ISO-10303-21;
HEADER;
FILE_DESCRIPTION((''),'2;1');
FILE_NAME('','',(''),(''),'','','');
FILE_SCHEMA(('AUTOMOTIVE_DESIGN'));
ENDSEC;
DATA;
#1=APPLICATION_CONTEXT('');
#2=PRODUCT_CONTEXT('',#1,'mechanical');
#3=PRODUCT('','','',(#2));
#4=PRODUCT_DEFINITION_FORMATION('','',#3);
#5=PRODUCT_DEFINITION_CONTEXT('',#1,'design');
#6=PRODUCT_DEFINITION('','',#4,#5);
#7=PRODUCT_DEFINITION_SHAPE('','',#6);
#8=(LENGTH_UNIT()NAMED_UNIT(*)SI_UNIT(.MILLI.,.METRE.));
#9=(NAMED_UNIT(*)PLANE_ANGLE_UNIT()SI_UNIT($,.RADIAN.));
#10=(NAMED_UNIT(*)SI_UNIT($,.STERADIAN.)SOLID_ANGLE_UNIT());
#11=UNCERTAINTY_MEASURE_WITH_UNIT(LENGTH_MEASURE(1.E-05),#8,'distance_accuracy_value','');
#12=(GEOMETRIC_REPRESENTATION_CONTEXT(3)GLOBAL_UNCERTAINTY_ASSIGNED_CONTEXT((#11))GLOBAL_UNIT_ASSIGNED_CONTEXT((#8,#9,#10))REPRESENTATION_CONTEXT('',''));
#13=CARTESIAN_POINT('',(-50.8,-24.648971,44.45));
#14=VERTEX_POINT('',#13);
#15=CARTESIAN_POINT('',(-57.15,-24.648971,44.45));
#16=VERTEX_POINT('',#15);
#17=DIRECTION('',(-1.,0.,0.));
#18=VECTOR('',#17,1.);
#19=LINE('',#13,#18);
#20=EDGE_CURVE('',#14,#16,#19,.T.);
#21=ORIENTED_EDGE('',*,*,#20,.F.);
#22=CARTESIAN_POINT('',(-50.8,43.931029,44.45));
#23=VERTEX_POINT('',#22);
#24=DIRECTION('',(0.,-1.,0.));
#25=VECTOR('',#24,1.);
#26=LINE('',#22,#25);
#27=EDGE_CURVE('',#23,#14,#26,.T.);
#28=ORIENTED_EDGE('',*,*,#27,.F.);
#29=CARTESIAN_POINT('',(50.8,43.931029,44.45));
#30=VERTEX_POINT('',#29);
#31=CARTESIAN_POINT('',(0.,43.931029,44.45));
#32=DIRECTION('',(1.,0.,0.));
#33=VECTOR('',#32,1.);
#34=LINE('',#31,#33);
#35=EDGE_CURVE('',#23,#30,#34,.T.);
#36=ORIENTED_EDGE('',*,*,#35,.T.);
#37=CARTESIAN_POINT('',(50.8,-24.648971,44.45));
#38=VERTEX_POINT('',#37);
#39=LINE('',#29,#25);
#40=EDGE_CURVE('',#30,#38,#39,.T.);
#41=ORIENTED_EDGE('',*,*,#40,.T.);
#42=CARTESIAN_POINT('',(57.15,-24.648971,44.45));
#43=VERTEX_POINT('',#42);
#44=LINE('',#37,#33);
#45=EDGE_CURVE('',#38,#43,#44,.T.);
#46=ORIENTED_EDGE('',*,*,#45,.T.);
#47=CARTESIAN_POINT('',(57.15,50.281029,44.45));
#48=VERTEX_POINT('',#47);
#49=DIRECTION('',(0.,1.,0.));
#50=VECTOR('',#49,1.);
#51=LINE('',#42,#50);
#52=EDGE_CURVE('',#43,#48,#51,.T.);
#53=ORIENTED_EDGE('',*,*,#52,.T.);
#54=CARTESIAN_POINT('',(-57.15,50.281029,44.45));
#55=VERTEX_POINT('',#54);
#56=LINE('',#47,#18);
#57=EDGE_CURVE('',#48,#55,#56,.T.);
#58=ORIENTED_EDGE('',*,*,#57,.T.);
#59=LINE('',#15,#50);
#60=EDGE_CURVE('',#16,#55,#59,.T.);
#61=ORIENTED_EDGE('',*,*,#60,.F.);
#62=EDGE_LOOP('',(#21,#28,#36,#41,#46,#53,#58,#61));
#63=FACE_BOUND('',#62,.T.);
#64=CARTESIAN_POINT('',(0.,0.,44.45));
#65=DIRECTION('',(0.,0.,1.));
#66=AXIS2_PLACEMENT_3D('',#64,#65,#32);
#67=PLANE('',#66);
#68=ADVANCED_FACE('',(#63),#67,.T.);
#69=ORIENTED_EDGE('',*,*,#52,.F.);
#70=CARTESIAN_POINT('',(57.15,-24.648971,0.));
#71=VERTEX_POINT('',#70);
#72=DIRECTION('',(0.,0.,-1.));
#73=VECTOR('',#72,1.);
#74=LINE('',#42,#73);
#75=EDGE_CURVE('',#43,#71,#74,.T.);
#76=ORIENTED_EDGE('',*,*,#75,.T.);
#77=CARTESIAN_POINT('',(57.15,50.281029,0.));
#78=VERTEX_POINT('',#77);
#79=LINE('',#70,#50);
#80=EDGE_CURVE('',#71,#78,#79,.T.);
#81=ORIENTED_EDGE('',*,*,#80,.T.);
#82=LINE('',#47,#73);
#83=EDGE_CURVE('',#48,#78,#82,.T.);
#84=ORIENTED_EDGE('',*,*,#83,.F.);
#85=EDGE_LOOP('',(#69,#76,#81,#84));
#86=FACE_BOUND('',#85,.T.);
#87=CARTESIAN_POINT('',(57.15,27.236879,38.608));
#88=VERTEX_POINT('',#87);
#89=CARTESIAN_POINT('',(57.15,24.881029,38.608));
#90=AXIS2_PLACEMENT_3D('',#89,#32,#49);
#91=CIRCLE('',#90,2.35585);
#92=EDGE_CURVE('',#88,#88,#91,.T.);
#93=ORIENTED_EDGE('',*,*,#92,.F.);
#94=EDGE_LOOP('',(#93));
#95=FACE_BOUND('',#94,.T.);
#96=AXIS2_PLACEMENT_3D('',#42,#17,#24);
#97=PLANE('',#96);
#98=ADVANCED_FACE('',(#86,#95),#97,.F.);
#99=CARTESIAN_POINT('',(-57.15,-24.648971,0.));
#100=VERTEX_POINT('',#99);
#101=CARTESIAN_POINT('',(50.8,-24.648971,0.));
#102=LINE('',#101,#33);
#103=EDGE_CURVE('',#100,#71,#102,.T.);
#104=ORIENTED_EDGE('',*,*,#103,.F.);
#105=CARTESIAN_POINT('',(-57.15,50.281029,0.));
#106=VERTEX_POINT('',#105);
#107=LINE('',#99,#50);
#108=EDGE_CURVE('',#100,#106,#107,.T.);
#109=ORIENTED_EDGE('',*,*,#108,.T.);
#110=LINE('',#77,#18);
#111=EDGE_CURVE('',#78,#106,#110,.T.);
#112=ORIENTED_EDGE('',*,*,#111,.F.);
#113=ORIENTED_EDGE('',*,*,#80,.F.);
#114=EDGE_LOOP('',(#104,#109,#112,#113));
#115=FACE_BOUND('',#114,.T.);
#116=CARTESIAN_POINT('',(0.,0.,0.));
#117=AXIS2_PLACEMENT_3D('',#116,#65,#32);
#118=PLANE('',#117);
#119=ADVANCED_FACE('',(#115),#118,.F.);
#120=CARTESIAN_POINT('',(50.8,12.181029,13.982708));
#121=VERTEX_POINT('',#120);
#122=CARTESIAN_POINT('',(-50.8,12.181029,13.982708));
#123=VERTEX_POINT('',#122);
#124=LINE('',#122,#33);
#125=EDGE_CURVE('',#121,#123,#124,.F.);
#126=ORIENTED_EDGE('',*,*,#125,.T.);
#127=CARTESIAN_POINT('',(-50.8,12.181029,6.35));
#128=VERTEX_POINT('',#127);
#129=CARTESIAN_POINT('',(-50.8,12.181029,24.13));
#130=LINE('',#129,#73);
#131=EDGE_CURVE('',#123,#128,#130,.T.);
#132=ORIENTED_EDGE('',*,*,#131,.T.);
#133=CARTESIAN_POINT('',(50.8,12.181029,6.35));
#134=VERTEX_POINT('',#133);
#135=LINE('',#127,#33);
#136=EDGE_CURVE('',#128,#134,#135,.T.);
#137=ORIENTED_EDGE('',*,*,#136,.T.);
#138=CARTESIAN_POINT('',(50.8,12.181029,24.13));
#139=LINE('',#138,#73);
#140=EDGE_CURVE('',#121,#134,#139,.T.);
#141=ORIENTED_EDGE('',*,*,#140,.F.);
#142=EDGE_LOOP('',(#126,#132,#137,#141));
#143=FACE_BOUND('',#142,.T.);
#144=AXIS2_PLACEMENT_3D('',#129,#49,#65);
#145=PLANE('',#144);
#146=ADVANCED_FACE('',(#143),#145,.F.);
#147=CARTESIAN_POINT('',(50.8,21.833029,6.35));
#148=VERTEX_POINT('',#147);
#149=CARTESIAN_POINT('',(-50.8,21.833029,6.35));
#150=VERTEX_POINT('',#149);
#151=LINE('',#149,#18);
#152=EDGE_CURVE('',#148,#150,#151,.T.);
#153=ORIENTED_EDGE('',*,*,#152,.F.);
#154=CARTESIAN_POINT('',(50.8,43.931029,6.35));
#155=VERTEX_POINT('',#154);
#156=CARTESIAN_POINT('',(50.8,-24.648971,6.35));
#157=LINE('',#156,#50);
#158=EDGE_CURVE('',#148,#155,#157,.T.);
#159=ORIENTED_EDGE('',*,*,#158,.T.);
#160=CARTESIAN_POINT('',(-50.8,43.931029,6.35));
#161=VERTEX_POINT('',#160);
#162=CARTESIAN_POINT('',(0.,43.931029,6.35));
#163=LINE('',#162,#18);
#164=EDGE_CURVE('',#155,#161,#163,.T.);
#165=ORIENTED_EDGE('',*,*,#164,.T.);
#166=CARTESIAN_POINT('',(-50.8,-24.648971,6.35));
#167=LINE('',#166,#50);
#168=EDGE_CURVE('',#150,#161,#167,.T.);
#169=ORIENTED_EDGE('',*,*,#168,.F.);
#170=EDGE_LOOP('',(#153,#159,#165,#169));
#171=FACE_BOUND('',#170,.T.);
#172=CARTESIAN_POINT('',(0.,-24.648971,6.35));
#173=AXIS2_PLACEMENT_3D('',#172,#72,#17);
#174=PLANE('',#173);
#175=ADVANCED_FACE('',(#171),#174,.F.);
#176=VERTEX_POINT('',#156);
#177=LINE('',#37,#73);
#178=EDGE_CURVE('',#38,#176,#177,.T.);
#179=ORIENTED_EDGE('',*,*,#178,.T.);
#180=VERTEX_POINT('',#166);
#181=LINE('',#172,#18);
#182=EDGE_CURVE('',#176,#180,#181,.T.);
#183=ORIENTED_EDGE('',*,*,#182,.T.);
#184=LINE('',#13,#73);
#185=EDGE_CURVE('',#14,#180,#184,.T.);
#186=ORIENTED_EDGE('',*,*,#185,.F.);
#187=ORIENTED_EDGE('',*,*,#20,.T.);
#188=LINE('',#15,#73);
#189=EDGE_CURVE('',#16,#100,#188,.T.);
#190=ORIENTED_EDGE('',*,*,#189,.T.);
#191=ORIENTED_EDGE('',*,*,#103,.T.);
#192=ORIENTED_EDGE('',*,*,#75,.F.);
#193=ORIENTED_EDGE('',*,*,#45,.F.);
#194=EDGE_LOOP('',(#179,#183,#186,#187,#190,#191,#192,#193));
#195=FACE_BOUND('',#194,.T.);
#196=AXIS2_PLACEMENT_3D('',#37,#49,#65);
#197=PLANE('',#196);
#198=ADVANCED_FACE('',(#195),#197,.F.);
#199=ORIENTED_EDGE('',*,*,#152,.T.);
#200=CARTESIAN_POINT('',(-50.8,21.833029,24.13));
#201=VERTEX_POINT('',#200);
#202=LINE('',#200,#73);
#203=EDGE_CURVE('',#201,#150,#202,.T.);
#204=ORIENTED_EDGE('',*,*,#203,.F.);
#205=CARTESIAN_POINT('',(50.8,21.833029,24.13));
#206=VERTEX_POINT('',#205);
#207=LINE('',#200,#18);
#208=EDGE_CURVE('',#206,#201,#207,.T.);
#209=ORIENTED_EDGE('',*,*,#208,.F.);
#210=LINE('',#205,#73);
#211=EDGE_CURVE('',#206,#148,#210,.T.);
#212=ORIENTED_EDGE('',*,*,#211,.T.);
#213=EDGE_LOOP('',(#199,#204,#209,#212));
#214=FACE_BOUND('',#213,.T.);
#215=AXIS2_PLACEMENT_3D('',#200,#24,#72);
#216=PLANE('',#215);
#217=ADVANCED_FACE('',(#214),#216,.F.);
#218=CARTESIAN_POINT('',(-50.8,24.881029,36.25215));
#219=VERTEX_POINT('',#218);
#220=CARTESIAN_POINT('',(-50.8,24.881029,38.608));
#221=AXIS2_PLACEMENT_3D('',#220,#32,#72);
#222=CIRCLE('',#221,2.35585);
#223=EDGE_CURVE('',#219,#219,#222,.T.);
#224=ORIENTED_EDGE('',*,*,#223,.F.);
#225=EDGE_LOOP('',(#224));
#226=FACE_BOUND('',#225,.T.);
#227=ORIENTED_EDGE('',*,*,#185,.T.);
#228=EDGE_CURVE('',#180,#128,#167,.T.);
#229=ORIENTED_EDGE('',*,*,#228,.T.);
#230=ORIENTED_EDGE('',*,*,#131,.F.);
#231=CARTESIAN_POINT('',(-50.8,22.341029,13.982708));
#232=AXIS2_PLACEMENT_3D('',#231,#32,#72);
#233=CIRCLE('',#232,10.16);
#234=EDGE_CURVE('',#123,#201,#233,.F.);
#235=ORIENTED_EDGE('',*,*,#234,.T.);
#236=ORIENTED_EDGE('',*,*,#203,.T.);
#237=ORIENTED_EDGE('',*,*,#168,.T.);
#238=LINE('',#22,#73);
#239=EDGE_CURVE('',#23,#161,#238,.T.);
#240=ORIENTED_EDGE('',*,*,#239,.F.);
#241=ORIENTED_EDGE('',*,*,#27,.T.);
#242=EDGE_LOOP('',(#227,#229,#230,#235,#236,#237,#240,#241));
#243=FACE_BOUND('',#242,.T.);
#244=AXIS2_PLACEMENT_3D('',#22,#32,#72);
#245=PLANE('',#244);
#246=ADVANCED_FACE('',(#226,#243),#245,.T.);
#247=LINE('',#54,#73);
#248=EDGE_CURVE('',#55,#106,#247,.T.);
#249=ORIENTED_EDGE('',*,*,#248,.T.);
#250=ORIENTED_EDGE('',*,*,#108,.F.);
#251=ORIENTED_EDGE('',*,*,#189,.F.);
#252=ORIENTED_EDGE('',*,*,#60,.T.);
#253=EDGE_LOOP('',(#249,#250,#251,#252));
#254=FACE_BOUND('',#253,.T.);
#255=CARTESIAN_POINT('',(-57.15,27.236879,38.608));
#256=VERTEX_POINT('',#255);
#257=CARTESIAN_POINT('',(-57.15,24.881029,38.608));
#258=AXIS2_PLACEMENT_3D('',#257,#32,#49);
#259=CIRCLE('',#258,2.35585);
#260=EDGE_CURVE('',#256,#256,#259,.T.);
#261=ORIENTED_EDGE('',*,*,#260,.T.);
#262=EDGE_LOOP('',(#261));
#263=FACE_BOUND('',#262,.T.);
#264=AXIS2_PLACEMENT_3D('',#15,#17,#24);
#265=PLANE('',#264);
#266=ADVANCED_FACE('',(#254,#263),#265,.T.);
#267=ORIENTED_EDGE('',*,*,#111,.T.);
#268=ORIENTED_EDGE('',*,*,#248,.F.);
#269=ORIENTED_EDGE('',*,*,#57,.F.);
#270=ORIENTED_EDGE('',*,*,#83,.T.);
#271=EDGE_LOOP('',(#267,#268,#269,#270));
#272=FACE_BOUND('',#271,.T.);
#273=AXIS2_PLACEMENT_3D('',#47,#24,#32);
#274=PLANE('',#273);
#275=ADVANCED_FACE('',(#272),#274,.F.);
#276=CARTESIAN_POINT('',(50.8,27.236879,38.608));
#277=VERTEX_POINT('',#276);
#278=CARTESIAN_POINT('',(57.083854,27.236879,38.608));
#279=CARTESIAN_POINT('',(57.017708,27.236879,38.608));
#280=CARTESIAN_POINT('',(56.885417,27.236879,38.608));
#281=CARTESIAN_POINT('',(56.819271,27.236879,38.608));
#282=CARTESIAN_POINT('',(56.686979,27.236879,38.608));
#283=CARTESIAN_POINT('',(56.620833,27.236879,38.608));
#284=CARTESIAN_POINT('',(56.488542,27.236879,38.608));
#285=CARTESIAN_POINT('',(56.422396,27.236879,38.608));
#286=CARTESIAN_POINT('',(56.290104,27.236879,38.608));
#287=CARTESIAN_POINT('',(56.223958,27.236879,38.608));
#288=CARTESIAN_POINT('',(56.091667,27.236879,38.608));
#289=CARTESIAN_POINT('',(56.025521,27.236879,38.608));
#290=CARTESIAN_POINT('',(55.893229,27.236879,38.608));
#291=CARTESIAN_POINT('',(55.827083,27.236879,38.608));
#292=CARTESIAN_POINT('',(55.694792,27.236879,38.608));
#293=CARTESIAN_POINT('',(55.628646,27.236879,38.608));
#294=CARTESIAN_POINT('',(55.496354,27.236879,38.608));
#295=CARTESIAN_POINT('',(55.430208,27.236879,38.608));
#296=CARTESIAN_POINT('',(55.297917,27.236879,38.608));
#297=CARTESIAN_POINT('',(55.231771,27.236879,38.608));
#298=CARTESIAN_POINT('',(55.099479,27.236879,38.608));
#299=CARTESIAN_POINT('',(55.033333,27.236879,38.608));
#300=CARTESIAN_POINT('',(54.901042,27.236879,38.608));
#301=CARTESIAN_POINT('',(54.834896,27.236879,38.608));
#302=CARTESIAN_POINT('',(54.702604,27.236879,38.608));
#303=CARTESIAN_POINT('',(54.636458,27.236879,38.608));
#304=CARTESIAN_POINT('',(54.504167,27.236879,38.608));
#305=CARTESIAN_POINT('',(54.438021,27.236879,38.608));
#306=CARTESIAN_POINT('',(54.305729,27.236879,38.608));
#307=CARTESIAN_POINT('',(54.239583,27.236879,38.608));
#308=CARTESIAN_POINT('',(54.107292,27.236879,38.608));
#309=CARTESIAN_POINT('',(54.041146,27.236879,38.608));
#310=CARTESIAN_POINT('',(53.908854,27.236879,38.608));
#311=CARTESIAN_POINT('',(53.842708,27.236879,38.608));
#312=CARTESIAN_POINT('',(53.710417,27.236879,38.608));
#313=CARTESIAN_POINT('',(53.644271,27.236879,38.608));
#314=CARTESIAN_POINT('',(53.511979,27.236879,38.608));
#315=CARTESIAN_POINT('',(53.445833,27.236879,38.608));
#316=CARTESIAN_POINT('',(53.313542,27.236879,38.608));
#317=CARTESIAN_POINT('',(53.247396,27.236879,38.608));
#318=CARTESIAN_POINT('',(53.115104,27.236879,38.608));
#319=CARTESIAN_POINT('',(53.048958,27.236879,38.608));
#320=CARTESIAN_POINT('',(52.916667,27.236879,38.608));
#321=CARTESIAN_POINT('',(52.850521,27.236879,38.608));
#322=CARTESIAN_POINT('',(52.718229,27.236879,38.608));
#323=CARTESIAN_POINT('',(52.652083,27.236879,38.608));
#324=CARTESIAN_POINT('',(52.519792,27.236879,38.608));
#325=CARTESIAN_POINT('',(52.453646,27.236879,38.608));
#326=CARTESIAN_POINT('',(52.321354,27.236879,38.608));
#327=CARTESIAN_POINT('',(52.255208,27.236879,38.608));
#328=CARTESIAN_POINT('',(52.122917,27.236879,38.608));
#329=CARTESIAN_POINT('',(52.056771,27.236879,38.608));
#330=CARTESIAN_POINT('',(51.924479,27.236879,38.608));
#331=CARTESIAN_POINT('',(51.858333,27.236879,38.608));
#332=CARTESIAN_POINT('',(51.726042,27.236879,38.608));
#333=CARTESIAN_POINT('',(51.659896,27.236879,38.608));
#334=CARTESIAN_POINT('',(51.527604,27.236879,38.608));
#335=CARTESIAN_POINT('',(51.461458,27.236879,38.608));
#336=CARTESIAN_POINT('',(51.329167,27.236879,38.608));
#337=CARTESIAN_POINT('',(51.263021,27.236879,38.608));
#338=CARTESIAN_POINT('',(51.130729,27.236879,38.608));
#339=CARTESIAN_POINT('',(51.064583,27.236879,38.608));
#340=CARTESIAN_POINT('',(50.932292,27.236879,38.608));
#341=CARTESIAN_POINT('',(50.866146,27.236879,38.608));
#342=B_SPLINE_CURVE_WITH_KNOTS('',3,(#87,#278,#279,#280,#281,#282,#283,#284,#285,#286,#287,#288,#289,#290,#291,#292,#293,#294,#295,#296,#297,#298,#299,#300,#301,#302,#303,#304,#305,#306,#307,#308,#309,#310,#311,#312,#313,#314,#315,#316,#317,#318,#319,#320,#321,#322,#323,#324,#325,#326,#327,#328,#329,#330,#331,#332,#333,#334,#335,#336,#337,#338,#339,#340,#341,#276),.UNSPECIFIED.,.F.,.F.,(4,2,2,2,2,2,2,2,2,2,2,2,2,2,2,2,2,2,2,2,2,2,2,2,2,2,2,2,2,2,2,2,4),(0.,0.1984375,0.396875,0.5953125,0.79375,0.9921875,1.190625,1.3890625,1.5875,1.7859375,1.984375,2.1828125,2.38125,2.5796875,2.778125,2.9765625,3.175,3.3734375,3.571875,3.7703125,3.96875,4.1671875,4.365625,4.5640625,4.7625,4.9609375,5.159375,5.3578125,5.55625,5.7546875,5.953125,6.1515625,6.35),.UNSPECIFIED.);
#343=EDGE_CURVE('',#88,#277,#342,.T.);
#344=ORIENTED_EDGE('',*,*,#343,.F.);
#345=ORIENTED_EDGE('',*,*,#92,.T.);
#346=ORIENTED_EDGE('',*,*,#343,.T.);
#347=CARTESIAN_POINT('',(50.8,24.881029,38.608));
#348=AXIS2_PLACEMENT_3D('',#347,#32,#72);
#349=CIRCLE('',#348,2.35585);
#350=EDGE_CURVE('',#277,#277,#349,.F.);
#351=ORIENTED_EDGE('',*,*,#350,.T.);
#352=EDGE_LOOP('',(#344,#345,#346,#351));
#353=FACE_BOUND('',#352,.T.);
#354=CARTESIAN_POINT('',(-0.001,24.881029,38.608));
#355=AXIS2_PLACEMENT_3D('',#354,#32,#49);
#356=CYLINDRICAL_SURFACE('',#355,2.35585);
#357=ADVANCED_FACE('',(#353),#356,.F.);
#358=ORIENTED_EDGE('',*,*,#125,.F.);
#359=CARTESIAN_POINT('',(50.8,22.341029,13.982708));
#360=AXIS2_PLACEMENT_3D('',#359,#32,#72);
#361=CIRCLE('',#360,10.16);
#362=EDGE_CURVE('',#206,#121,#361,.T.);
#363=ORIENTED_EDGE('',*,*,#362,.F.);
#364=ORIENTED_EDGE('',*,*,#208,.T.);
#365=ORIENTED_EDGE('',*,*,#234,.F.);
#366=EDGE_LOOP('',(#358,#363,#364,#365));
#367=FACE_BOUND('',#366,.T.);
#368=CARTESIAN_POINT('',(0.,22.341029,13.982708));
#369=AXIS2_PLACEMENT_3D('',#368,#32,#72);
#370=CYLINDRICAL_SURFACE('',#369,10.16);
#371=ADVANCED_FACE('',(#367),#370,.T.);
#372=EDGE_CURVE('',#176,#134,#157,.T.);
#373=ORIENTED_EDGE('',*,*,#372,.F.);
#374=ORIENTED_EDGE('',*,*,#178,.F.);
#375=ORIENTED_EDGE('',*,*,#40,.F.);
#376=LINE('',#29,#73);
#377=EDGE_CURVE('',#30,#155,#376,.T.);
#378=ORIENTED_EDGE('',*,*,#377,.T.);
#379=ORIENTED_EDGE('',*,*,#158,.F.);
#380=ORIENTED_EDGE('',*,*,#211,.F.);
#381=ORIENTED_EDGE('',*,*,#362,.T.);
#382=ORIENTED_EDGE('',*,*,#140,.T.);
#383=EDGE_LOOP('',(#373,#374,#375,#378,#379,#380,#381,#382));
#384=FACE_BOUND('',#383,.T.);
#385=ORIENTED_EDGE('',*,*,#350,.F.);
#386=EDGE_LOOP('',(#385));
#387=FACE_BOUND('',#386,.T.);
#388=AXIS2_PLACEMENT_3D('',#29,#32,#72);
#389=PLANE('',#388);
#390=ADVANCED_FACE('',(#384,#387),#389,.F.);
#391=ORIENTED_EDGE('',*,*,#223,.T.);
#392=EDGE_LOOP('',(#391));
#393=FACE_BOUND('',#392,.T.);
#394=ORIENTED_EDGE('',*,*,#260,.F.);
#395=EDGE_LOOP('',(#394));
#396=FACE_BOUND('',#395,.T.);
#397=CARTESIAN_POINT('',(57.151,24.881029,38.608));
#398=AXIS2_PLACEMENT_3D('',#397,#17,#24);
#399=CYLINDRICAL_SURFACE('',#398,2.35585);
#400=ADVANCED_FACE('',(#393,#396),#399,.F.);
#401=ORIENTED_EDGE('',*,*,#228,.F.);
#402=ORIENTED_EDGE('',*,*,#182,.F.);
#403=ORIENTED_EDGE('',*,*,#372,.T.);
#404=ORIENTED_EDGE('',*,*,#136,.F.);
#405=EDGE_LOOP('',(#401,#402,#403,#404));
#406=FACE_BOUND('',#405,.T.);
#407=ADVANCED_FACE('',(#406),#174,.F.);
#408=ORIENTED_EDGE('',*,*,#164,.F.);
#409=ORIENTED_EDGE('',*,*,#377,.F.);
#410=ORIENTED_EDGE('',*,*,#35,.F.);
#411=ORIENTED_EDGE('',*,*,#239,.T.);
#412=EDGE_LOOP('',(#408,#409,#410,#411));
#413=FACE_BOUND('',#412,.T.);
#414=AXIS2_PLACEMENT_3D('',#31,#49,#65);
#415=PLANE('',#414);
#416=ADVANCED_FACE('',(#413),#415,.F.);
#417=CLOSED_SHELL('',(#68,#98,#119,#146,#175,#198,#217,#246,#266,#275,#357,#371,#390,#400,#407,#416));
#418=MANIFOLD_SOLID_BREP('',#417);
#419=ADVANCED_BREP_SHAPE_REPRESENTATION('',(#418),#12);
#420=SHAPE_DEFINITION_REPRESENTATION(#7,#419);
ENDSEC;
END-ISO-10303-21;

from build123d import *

# Parameters (mm, degrees)
BOSS_EXTRUDE1_DEPTH = 44.45
SKETCH2_W           = 50.8
SKETCH2_H           = 6.35
BOSS_EXTRUDE2_DEPTH = 68.58
CUT_EXTRUDE1_REACH  = 90.148
SKETCH3_R           = 2.35585
SKETCH4_W           = 101.6
SKETCH4_H           = 9.652
BOSS_EXTRUDE3_DEPTH = 17.78
FILLET1_R           = 10.16


with BuildPart() as part:
    # Sketch1 → Boss-Extrude1 (new body)
    with BuildSketch(Plane.XY):
        Polygon((0, 43.931028897), (50.8, 43.931028897), (50.8, -24.648971103), (57.15, -24.648971103), (57.15, 50.281028897), (0, 50.281028897), align=None)
    boss_extrude1 = extrude(amount=BOSS_EXTRUDE1_DEPTH)

    # Sketch2 → Boss-Extrude2 (add)
    with BuildSketch(Plane.XZ.offset(-43.931028897)):
        with Locations((25.4, 3.175)):
            Rectangle(SKETCH2_W, SKETCH2_H)
    boss_extrude2 = extrude(amount=BOSS_EXTRUDE2_DEPTH)

    # Sketch3 → Cut-Extrude1 (cut, up to next)
    with BuildSketch(Plane(origin=(57.15, 0, 0), x_dir=(0, 0, -1), z_dir=(1, 0, 0)), mode=Mode.PRIVATE) as cut_extrude1_sk1:
        with Locations(Location((-38.608, 24.881028897, 0), (0, 0, 90))):
            Circle(SKETCH3_R)
    cut_extrude1_tool1 = extrude(cut_extrude1_sk1.sketch, amount=-CUT_EXTRUDE1_REACH, mode=Mode.PRIVATE) & part.part
    cut_extrude1 = cut_extrude1_tool1.solids().sort_by_distance((57.15, 24.881029, 38.608))[0]
    add(cut_extrude1, mode=Mode.SUBTRACT)

    # Mirror1: Boss-Extrude1, Boss-Extrude2, Cut-Extrude1 across plane
    add(boss_extrude1.mirror(Plane(origin=(0, 0, 0), x_dir=(0, 0, 1), z_dir=(1, 0, 0))))
    add(boss_extrude2.mirror(Plane(origin=(0, 0, 0), x_dir=(0, 0, 1), z_dir=(1, 0, 0))))
    add(cut_extrude1.mirror(Plane(origin=(0, 0, 0), x_dir=(0, 0, 1), z_dir=(1, 0, 0))), mode=Mode.SUBTRACT)

    # Sketch4 → Boss-Extrude3 (add)
    with BuildSketch(Plane.XY.offset(6.35)):
        with Locations((0, 17.007028897)):
            Rectangle(SKETCH4_W, SKETCH4_H)
    extrude(amount=BOSS_EXTRUDE3_DEPTH)

    # Fillet1
    # the kernel refuses this fillet: 10.16 mm, written as the material it takes off along each edge
    with BuildSketch(Plane(origin=(50.8, 12.181028897, 24.13), x_dir=(0, 1, 0), z_dir=(-1, 0, 0))) as fillet1_piece_1:
        with BuildLine():
            CenterArc((10.16, 10.147292053), FILLET1_R, 180, 87.134016017)
            Line((0, 10.147292053), (0, 0))
            Line((0, 0), (9.652, 0))
        make_face()
    extrude(amount=101.6, mode=Mode.SUBTRACT)


solid = part.part
